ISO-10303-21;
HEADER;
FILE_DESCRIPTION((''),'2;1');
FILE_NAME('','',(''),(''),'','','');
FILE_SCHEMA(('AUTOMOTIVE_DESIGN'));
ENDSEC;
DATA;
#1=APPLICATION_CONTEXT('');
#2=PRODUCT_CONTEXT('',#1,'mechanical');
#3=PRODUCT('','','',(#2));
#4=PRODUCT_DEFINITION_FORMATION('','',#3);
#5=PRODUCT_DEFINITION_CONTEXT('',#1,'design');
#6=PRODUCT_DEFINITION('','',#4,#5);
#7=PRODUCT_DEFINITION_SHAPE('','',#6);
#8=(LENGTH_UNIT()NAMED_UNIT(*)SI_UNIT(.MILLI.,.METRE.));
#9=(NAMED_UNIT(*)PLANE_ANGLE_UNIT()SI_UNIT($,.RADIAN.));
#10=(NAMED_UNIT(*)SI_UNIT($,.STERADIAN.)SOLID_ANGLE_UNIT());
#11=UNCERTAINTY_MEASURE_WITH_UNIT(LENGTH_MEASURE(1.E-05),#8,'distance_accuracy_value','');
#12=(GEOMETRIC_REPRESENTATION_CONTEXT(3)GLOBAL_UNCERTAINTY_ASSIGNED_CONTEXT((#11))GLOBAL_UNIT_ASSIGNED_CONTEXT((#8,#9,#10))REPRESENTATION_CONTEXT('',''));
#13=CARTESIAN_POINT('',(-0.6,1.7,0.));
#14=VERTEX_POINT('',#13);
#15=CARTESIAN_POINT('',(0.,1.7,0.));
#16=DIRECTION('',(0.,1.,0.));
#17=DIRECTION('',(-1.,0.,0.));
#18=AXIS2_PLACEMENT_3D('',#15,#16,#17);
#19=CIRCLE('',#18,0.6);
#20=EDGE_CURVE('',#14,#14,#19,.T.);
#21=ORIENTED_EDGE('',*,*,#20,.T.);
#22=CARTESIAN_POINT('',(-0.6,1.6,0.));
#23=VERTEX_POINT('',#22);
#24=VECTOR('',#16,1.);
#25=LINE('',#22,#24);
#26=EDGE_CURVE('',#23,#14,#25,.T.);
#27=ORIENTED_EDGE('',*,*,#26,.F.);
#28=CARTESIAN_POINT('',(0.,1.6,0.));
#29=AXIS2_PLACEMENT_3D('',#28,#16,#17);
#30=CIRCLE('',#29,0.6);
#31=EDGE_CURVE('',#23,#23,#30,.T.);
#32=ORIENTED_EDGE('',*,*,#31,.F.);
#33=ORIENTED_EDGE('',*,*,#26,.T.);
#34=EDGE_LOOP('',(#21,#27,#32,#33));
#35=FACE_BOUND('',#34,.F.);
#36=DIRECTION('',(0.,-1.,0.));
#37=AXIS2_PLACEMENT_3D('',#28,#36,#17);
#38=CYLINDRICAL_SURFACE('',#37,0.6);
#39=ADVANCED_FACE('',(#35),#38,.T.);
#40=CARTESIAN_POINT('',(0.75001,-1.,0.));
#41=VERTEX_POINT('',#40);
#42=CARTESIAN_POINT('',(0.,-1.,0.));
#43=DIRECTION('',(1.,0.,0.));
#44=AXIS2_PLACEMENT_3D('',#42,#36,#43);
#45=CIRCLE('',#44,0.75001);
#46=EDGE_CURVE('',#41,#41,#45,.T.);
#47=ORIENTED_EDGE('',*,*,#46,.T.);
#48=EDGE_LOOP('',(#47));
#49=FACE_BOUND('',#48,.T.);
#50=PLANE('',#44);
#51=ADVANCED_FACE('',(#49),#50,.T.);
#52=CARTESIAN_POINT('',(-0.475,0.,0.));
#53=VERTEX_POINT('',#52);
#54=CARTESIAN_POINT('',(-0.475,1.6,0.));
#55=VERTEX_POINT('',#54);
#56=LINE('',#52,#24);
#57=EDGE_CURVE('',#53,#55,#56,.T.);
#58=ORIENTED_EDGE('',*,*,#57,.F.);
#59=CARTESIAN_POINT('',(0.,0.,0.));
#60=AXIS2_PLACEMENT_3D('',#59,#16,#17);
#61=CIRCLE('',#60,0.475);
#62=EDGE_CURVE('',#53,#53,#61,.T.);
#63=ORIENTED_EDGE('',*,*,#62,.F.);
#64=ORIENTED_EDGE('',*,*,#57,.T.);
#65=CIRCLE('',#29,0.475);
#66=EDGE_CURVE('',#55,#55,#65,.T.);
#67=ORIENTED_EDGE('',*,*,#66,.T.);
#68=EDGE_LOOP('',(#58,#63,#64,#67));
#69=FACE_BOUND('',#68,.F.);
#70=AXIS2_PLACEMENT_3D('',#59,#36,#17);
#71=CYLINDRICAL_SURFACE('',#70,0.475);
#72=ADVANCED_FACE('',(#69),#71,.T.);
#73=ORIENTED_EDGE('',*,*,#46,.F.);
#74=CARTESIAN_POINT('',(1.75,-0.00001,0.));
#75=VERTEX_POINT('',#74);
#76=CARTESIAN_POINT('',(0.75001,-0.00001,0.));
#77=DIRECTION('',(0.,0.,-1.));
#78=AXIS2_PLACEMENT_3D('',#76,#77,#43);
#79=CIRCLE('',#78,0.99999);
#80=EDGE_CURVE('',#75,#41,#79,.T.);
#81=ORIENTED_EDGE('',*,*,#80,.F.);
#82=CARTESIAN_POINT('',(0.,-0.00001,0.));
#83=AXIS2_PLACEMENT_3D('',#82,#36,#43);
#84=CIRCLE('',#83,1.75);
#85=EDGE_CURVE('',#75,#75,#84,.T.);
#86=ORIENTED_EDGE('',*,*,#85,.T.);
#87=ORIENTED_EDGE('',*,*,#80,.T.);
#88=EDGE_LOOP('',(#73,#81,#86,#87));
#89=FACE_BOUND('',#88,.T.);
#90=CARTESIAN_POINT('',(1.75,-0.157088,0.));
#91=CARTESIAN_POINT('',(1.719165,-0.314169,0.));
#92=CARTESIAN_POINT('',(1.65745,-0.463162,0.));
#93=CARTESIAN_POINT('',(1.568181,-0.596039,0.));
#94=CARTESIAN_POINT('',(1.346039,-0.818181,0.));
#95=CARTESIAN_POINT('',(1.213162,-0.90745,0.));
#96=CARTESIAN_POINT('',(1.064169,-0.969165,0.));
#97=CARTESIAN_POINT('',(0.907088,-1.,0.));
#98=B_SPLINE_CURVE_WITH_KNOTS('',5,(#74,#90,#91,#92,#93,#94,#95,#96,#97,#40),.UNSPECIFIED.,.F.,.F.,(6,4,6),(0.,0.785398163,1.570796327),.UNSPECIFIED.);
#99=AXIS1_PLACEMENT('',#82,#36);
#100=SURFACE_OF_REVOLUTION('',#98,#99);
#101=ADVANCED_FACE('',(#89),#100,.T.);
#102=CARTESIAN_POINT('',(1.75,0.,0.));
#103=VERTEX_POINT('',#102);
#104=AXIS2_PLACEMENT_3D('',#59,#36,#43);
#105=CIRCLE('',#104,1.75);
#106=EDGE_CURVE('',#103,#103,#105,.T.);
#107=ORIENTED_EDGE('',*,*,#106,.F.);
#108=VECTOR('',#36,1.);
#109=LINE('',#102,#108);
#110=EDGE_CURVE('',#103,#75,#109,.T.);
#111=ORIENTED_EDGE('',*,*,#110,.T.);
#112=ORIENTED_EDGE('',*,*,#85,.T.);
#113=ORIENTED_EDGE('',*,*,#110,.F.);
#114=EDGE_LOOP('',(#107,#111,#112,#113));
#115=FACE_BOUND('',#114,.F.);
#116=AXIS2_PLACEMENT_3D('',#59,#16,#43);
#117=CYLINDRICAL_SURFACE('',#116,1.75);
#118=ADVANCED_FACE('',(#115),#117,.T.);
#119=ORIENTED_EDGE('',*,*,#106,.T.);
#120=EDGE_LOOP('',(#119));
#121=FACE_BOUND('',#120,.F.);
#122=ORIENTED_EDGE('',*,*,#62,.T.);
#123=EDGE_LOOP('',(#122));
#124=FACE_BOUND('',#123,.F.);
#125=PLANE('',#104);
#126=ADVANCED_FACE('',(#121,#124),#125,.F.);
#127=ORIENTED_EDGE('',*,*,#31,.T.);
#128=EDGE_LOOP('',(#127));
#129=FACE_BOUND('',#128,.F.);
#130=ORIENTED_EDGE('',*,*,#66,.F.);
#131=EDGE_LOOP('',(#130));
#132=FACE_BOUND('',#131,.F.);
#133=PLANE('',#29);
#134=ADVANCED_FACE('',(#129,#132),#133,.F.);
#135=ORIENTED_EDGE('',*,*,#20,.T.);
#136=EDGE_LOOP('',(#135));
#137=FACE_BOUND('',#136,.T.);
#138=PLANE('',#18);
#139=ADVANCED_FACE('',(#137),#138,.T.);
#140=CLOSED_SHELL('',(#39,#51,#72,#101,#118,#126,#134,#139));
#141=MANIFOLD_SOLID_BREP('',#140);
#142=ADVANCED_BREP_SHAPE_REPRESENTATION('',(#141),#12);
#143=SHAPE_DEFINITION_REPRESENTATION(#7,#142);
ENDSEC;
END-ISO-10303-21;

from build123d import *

# Parameters (mm, degrees)
F0_R     = 1.75
F1_DEPTH = 1
F2_R     = 0.99999
F3_R     = 0.475
F4_DEPTH = 1.6
F5_R     = 0.6
F6_DEPTH = 0.1


# Not quite as in the source:
# - a fillet or chamfer is up to 0.001 mm smaller than in the source, because OpenCascade refuses the exact size


with BuildPart() as f1:
    # F0 (on Front) → F1 (new body)
    with BuildSketch(Plane.XZ):
        Circle(F0_R)
    extrude(amount=F1_DEPTH)

    # F2 (radius 1 in the source; OpenCascade refuses exactly that, so slightly less here)
    f2_edges = [f1.edges().sort_by_distance(p)[0] for p in [
        (-1.75, -1, 0),
    ]]
    fillet(f2_edges, radius=F2_R)

    # F3 (on face) → F4 (join)
    with BuildSketch(Plane(origin=(0, 0, 0), x_dir=(-1, 0, 0), z_dir=(0, 1, 0))):
        Circle(F3_R)
    extrude(amount=F4_DEPTH)

    # F5 (on face) → F6 (join)
    with BuildSketch(Plane(origin=(0, 1.6, 0), x_dir=(-1, 0, 0), z_dir=(0, 1, 0))):
        Circle(F5_R)
    extrude(amount=F6_DEPTH)


solid = f1.part
